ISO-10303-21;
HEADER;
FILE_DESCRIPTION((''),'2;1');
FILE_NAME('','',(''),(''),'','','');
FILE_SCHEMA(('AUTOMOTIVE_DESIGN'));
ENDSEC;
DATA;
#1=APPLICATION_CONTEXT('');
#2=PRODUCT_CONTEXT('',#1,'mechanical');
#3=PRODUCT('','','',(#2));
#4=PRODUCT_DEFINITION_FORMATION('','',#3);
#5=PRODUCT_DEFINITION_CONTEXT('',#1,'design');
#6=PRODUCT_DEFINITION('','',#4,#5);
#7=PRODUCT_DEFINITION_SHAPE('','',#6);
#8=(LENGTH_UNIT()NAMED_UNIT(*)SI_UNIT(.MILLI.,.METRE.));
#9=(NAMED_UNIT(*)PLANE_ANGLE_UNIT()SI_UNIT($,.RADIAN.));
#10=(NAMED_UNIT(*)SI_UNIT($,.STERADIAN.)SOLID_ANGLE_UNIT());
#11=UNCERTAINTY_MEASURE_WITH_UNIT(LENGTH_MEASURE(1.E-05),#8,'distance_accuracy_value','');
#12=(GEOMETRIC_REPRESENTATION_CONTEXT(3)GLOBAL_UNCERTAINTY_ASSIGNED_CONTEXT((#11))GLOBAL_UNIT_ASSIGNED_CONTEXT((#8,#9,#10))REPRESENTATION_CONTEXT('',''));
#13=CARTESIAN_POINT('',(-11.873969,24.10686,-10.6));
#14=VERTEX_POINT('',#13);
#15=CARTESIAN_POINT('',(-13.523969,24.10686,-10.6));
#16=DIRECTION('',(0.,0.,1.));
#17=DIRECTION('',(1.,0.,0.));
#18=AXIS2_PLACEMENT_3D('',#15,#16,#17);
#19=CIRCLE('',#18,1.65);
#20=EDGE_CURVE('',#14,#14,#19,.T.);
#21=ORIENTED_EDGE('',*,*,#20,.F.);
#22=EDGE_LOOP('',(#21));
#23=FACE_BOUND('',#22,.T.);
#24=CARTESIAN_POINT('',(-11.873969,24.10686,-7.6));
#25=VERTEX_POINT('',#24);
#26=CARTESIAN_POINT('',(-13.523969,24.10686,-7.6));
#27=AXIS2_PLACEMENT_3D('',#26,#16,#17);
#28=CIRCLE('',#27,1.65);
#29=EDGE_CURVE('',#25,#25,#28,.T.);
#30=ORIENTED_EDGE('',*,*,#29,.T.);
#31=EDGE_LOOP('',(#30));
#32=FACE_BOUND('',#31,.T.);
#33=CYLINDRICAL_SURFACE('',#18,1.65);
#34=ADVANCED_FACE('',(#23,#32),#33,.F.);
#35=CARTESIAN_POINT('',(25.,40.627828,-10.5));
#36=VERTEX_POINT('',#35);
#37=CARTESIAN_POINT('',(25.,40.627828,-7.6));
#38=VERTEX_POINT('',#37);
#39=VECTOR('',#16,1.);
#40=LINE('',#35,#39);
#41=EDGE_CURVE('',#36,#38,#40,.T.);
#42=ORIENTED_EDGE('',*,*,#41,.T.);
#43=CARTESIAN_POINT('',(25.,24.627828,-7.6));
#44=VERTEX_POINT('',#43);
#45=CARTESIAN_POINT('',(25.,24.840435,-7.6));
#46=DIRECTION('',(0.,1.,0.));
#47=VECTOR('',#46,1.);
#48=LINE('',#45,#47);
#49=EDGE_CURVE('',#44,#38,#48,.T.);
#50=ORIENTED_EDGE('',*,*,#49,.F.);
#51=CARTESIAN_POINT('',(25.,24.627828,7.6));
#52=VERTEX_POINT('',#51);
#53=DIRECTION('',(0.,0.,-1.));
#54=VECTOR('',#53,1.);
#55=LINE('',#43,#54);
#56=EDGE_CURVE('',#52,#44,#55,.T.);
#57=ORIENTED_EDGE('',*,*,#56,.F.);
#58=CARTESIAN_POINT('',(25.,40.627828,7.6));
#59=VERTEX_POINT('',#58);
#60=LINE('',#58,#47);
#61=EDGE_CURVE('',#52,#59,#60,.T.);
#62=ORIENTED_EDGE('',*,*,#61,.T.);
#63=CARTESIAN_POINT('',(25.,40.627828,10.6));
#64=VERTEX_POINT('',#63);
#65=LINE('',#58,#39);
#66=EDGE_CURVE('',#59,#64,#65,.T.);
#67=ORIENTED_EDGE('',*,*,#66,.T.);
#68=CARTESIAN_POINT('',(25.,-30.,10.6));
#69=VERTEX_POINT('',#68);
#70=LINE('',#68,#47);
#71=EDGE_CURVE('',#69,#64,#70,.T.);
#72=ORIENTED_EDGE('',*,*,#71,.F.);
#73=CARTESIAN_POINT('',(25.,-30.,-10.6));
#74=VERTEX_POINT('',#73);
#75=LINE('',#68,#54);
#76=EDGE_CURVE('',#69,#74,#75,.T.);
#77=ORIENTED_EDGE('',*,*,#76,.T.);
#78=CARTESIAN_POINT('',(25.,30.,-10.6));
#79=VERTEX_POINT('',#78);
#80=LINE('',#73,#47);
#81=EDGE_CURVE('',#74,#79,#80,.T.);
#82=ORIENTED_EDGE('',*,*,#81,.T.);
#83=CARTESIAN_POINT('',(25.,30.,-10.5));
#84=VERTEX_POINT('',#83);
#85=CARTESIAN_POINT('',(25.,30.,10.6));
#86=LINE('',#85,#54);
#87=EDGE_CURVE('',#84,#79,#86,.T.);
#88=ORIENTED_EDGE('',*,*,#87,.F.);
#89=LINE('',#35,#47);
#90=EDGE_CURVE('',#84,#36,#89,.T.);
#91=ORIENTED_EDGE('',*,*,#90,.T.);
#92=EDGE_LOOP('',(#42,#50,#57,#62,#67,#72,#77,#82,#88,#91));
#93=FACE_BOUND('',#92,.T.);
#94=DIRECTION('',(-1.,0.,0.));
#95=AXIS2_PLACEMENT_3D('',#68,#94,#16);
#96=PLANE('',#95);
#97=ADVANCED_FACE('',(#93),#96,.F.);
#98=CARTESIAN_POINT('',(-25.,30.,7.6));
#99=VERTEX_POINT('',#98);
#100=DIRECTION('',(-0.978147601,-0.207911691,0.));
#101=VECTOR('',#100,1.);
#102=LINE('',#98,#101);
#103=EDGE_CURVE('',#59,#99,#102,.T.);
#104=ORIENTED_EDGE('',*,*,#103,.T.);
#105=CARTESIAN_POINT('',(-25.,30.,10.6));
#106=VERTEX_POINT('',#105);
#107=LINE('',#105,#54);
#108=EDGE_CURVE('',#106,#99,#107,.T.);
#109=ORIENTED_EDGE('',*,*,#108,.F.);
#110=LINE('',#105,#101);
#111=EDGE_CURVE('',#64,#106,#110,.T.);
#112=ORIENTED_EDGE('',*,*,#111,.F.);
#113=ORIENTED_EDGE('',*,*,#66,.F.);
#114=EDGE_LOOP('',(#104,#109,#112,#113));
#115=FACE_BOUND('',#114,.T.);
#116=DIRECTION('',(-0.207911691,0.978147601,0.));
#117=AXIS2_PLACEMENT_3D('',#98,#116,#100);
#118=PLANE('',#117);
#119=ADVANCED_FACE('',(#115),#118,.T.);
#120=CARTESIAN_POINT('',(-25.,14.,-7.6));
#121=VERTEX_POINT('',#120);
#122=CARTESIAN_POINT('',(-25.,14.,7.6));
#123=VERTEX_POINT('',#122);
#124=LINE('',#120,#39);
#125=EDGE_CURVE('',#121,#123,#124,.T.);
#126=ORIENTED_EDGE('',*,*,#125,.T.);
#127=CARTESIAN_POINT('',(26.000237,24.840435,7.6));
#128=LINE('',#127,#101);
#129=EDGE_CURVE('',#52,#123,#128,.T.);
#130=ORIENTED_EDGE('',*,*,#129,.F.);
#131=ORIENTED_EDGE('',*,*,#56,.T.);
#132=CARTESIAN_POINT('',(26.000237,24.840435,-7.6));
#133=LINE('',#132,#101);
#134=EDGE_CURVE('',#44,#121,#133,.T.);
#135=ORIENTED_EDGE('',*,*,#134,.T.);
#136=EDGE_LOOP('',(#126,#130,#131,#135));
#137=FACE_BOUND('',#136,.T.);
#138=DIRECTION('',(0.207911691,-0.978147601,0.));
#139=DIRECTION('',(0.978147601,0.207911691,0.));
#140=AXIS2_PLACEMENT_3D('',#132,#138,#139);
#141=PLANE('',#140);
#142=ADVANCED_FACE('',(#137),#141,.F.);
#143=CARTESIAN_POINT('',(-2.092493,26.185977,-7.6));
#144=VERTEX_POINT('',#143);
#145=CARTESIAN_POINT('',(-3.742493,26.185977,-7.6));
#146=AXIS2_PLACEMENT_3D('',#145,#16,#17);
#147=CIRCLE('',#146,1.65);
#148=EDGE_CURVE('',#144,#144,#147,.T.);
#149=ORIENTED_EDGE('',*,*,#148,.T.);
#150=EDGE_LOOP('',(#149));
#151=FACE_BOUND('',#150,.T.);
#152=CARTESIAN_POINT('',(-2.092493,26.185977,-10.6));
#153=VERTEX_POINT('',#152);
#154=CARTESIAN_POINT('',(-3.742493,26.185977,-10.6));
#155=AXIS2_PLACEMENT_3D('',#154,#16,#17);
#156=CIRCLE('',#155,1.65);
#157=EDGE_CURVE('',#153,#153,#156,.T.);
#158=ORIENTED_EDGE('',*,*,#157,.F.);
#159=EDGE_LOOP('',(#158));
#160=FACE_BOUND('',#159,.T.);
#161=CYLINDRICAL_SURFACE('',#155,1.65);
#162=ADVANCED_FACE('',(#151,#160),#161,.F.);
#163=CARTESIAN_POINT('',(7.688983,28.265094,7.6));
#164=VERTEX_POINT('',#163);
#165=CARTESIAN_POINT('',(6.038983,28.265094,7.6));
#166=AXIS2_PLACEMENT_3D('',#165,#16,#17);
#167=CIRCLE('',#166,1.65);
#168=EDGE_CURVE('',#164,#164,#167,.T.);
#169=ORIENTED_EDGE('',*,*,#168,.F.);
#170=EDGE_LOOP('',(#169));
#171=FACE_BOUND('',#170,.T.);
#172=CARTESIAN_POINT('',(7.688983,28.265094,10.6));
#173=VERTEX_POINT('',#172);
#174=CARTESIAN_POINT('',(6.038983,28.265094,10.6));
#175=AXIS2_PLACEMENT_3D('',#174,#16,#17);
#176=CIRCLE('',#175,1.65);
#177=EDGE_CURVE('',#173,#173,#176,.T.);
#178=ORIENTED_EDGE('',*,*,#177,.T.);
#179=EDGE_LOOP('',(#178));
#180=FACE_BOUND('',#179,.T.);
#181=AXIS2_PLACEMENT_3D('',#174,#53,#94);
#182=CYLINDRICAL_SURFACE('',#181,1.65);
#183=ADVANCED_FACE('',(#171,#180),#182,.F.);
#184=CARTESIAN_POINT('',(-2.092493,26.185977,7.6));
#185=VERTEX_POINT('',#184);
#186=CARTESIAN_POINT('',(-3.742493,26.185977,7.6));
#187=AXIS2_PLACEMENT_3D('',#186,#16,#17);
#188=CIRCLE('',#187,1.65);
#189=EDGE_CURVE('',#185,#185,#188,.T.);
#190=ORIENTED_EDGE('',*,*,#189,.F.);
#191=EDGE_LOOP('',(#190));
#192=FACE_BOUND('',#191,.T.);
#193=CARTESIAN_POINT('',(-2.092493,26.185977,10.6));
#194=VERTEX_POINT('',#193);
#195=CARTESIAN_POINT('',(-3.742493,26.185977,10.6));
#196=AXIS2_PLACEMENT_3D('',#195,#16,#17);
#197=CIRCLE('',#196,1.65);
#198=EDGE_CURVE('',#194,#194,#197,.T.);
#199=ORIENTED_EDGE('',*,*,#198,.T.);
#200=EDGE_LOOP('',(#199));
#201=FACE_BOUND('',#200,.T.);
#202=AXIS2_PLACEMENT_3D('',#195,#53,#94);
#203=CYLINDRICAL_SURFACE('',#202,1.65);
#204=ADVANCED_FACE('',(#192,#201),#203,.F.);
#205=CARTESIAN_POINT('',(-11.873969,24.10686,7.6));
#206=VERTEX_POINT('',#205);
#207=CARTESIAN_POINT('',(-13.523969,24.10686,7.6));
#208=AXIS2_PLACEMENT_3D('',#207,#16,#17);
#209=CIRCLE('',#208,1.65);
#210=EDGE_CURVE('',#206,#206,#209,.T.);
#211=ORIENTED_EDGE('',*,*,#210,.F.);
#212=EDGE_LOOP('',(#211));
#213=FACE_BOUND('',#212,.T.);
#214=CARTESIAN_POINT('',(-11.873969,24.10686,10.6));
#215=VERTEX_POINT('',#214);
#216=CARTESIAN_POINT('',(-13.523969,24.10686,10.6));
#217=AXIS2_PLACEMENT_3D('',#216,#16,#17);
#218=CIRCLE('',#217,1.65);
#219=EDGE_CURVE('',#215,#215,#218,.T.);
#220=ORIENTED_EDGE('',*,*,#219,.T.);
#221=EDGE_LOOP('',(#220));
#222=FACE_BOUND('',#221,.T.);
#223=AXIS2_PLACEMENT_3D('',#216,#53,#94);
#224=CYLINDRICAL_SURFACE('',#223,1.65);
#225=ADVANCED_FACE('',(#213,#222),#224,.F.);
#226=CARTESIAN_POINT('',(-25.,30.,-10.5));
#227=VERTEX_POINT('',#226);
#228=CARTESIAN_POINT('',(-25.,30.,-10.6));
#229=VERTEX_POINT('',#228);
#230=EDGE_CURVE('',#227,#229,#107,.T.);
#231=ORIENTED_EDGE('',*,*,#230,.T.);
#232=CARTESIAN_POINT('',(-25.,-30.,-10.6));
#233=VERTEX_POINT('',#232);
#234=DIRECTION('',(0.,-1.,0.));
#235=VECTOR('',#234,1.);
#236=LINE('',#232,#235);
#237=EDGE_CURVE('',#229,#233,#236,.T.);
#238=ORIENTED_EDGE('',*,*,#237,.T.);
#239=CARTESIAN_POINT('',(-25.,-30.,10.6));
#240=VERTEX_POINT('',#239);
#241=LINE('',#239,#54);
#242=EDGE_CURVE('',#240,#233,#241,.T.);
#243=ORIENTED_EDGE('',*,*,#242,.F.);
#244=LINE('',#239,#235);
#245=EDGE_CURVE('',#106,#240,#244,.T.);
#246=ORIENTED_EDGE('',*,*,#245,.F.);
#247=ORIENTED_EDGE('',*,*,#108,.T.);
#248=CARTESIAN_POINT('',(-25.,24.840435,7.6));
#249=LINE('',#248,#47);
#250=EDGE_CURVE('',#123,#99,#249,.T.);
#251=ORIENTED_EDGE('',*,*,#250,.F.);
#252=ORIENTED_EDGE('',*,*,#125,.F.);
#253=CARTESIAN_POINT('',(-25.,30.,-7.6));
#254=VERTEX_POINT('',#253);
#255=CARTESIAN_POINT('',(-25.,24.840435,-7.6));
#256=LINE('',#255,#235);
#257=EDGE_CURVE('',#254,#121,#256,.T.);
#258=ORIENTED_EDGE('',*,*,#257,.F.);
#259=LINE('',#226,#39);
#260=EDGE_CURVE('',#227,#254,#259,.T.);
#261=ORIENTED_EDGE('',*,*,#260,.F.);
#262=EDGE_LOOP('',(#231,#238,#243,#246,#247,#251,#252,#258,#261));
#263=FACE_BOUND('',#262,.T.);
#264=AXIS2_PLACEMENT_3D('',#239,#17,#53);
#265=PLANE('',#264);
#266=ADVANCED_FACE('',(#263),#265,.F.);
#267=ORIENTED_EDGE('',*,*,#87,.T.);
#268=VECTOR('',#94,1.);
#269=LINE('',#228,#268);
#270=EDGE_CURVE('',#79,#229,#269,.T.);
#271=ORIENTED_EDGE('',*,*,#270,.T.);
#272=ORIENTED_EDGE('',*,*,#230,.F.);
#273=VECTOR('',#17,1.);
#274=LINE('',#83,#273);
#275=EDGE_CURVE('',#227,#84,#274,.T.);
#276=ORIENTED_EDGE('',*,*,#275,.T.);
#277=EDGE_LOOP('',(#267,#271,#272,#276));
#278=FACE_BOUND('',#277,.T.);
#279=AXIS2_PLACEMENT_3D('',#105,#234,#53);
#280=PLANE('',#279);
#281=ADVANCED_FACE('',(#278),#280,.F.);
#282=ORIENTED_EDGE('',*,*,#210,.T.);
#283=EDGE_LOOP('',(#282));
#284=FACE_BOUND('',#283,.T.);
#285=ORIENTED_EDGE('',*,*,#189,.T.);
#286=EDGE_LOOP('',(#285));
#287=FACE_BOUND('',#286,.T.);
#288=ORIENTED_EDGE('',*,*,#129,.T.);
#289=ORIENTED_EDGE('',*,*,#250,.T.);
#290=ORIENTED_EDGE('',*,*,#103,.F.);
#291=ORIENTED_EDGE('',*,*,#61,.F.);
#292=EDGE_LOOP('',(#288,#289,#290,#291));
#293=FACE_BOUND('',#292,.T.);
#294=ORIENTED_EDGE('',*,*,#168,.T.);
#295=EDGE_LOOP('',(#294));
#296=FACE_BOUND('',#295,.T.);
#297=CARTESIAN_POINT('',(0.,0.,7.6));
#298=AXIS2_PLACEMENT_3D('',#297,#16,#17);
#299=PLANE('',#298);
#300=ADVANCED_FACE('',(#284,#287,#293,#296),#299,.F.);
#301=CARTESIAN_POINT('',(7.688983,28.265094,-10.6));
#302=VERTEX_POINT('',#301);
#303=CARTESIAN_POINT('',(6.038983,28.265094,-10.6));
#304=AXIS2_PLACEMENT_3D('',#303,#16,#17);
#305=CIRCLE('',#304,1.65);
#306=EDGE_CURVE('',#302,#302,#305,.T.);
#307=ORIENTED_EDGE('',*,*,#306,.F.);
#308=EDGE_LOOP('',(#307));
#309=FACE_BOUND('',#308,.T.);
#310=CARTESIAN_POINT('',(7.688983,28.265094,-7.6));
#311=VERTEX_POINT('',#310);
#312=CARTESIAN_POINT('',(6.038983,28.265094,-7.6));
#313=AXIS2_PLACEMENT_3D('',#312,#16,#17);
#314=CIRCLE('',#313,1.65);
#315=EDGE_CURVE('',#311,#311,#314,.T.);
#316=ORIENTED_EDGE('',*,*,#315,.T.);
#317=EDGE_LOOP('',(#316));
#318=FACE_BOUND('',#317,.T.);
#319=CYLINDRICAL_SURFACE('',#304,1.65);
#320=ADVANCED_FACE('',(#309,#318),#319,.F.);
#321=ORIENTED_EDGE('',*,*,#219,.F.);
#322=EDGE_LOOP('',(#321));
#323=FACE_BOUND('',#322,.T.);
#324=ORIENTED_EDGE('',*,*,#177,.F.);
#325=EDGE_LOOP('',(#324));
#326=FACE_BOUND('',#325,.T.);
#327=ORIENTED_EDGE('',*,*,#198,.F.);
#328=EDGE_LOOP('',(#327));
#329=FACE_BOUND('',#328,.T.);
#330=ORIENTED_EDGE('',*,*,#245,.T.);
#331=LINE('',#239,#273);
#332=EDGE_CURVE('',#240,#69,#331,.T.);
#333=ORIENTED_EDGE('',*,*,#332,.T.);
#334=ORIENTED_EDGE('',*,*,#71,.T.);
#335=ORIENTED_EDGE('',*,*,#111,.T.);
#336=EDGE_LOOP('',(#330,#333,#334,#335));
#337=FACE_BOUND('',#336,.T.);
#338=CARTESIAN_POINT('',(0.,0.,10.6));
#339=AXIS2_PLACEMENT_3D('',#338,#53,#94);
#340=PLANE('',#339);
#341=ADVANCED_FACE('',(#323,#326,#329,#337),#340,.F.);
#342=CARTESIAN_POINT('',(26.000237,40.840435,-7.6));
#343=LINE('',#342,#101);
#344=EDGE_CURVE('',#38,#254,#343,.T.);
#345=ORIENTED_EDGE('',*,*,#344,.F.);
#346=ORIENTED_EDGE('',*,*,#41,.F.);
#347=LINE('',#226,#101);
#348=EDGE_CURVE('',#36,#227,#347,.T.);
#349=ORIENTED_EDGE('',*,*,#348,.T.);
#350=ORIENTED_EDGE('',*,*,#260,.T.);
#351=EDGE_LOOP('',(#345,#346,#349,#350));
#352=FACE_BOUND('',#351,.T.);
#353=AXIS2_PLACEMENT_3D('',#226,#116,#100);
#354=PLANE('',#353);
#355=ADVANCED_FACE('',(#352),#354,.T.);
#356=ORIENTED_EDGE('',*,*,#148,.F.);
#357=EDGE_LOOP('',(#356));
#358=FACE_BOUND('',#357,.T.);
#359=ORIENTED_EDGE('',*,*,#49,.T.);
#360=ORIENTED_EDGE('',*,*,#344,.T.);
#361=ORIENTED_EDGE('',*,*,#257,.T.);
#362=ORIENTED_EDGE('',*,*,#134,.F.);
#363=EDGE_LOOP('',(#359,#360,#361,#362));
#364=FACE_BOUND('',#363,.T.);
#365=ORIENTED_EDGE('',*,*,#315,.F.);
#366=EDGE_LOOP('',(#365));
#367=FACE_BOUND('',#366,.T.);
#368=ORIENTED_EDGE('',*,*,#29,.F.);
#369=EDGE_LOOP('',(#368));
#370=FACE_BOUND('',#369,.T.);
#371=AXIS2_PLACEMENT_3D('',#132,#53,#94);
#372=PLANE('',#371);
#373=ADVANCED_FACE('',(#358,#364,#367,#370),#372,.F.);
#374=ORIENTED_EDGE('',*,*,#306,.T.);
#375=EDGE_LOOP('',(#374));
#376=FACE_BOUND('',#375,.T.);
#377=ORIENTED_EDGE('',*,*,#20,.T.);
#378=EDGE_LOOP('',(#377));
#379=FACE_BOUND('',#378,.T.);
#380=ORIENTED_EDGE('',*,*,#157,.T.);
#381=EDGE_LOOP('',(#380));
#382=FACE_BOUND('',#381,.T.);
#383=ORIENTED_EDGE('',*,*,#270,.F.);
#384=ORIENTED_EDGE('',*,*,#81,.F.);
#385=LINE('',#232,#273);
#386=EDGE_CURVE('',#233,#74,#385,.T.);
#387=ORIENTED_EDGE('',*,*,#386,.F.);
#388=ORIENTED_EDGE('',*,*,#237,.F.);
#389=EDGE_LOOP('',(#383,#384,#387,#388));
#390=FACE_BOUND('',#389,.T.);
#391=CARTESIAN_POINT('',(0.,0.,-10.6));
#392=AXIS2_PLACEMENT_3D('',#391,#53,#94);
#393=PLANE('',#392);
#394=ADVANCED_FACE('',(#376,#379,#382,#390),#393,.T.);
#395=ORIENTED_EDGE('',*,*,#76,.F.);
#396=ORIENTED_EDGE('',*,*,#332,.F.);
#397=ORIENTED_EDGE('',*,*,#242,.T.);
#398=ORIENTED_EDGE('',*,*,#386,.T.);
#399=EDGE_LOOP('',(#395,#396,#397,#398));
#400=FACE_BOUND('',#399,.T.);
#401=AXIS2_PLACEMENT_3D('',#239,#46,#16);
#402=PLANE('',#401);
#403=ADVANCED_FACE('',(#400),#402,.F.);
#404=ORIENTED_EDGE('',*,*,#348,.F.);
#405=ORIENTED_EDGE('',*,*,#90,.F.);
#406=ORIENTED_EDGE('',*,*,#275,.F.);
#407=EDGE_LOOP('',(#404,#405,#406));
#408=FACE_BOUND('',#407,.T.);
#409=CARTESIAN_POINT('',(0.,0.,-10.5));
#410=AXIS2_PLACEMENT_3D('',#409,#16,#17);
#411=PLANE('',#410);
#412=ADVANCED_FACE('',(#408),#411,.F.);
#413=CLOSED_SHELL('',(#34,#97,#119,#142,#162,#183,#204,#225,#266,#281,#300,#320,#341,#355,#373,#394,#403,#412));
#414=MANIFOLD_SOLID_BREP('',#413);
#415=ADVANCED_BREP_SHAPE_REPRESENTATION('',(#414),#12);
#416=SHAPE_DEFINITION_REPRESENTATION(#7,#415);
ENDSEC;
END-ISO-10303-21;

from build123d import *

# Parameters (mm, degrees)
SKETCH_1_W          = 50
SKETCH_1_H          = 60
EXTRUDE_1_DEPTH     = 10.6
EXTRUDE_2_DEPTH     = 3
EXTRUDE_START       = -18.1
EXTRUDE_3_DEPTH     = 3
SKETCH_3_W          = 15.2
SKETCH_3_H          = 16
SKETCH_4_R          = 1.65
CUT_EXTRUDE_1_DEPTH = 3


with BuildPart() as part:
    # 草图1 → 凸台-拉伸1 (new, symmetric)
    with BuildSketch(Plane.XY):
        Rectangle(SKETCH_1_W, SKETCH_1_H)
    extrude(amount=EXTRUDE_1_DEPTH, both=True)

    # 草图2 → 凸台-拉伸2 (add)
    with BuildSketch(Plane.XY.offset(10.6)):
        Polygon((-25, 30), (25, 40.627828084), (25, 30), align=None)
    extrude(amount=-EXTRUDE_2_DEPTH)

    # 草图2<2> → 凸台-拉伸3 (add)
    with BuildSketch(Plane.XY.offset(10.6).offset(EXTRUDE_START)):
        Polygon((-25, 30), (25, 40.627828084), (25, 30), align=None)
    extrude(amount=-EXTRUDE_3_DEPTH)

    # 切除-扫描1: sweep along a curve in space
    with BuildLine() as sweep_1_path:
        Line((25, 40.627828084, 10.6), (-25, 30, 10.6))
    # 草图3 → 切除-扫描1 (sweep, cut)
    with BuildSketch(Plane.ZY.offset(25)):
        with Locations((0, 22)):
            Rectangle(SKETCH_3_W, SKETCH_3_H)
    sweep(path=sweep_1_path.line, mode=Mode.SUBTRACT)

    # 草图4 → 切除-拉伸1 (cut)
    with BuildSketch(Plane.XY.offset(-7.6)):
        with Locations((-13.523968529, 24.106860253)):
            Circle(SKETCH_4_R)
        with Locations((-3.742492522, 26.185977161)):
            Circle(SKETCH_4_R)
        with Locations((6.038983485, 28.265094069)):
            Circle(SKETCH_4_R)
    cut_extrude_1 = extrude(amount=-CUT_EXTRUDE_1_DEPTH, mode=Mode.SUBTRACT)

    # 镜向1: 切除-拉伸1 across plane
    add(cut_extrude_1.mirror(Plane.XY), mode=Mode.SUBTRACT)


solid = part.part
